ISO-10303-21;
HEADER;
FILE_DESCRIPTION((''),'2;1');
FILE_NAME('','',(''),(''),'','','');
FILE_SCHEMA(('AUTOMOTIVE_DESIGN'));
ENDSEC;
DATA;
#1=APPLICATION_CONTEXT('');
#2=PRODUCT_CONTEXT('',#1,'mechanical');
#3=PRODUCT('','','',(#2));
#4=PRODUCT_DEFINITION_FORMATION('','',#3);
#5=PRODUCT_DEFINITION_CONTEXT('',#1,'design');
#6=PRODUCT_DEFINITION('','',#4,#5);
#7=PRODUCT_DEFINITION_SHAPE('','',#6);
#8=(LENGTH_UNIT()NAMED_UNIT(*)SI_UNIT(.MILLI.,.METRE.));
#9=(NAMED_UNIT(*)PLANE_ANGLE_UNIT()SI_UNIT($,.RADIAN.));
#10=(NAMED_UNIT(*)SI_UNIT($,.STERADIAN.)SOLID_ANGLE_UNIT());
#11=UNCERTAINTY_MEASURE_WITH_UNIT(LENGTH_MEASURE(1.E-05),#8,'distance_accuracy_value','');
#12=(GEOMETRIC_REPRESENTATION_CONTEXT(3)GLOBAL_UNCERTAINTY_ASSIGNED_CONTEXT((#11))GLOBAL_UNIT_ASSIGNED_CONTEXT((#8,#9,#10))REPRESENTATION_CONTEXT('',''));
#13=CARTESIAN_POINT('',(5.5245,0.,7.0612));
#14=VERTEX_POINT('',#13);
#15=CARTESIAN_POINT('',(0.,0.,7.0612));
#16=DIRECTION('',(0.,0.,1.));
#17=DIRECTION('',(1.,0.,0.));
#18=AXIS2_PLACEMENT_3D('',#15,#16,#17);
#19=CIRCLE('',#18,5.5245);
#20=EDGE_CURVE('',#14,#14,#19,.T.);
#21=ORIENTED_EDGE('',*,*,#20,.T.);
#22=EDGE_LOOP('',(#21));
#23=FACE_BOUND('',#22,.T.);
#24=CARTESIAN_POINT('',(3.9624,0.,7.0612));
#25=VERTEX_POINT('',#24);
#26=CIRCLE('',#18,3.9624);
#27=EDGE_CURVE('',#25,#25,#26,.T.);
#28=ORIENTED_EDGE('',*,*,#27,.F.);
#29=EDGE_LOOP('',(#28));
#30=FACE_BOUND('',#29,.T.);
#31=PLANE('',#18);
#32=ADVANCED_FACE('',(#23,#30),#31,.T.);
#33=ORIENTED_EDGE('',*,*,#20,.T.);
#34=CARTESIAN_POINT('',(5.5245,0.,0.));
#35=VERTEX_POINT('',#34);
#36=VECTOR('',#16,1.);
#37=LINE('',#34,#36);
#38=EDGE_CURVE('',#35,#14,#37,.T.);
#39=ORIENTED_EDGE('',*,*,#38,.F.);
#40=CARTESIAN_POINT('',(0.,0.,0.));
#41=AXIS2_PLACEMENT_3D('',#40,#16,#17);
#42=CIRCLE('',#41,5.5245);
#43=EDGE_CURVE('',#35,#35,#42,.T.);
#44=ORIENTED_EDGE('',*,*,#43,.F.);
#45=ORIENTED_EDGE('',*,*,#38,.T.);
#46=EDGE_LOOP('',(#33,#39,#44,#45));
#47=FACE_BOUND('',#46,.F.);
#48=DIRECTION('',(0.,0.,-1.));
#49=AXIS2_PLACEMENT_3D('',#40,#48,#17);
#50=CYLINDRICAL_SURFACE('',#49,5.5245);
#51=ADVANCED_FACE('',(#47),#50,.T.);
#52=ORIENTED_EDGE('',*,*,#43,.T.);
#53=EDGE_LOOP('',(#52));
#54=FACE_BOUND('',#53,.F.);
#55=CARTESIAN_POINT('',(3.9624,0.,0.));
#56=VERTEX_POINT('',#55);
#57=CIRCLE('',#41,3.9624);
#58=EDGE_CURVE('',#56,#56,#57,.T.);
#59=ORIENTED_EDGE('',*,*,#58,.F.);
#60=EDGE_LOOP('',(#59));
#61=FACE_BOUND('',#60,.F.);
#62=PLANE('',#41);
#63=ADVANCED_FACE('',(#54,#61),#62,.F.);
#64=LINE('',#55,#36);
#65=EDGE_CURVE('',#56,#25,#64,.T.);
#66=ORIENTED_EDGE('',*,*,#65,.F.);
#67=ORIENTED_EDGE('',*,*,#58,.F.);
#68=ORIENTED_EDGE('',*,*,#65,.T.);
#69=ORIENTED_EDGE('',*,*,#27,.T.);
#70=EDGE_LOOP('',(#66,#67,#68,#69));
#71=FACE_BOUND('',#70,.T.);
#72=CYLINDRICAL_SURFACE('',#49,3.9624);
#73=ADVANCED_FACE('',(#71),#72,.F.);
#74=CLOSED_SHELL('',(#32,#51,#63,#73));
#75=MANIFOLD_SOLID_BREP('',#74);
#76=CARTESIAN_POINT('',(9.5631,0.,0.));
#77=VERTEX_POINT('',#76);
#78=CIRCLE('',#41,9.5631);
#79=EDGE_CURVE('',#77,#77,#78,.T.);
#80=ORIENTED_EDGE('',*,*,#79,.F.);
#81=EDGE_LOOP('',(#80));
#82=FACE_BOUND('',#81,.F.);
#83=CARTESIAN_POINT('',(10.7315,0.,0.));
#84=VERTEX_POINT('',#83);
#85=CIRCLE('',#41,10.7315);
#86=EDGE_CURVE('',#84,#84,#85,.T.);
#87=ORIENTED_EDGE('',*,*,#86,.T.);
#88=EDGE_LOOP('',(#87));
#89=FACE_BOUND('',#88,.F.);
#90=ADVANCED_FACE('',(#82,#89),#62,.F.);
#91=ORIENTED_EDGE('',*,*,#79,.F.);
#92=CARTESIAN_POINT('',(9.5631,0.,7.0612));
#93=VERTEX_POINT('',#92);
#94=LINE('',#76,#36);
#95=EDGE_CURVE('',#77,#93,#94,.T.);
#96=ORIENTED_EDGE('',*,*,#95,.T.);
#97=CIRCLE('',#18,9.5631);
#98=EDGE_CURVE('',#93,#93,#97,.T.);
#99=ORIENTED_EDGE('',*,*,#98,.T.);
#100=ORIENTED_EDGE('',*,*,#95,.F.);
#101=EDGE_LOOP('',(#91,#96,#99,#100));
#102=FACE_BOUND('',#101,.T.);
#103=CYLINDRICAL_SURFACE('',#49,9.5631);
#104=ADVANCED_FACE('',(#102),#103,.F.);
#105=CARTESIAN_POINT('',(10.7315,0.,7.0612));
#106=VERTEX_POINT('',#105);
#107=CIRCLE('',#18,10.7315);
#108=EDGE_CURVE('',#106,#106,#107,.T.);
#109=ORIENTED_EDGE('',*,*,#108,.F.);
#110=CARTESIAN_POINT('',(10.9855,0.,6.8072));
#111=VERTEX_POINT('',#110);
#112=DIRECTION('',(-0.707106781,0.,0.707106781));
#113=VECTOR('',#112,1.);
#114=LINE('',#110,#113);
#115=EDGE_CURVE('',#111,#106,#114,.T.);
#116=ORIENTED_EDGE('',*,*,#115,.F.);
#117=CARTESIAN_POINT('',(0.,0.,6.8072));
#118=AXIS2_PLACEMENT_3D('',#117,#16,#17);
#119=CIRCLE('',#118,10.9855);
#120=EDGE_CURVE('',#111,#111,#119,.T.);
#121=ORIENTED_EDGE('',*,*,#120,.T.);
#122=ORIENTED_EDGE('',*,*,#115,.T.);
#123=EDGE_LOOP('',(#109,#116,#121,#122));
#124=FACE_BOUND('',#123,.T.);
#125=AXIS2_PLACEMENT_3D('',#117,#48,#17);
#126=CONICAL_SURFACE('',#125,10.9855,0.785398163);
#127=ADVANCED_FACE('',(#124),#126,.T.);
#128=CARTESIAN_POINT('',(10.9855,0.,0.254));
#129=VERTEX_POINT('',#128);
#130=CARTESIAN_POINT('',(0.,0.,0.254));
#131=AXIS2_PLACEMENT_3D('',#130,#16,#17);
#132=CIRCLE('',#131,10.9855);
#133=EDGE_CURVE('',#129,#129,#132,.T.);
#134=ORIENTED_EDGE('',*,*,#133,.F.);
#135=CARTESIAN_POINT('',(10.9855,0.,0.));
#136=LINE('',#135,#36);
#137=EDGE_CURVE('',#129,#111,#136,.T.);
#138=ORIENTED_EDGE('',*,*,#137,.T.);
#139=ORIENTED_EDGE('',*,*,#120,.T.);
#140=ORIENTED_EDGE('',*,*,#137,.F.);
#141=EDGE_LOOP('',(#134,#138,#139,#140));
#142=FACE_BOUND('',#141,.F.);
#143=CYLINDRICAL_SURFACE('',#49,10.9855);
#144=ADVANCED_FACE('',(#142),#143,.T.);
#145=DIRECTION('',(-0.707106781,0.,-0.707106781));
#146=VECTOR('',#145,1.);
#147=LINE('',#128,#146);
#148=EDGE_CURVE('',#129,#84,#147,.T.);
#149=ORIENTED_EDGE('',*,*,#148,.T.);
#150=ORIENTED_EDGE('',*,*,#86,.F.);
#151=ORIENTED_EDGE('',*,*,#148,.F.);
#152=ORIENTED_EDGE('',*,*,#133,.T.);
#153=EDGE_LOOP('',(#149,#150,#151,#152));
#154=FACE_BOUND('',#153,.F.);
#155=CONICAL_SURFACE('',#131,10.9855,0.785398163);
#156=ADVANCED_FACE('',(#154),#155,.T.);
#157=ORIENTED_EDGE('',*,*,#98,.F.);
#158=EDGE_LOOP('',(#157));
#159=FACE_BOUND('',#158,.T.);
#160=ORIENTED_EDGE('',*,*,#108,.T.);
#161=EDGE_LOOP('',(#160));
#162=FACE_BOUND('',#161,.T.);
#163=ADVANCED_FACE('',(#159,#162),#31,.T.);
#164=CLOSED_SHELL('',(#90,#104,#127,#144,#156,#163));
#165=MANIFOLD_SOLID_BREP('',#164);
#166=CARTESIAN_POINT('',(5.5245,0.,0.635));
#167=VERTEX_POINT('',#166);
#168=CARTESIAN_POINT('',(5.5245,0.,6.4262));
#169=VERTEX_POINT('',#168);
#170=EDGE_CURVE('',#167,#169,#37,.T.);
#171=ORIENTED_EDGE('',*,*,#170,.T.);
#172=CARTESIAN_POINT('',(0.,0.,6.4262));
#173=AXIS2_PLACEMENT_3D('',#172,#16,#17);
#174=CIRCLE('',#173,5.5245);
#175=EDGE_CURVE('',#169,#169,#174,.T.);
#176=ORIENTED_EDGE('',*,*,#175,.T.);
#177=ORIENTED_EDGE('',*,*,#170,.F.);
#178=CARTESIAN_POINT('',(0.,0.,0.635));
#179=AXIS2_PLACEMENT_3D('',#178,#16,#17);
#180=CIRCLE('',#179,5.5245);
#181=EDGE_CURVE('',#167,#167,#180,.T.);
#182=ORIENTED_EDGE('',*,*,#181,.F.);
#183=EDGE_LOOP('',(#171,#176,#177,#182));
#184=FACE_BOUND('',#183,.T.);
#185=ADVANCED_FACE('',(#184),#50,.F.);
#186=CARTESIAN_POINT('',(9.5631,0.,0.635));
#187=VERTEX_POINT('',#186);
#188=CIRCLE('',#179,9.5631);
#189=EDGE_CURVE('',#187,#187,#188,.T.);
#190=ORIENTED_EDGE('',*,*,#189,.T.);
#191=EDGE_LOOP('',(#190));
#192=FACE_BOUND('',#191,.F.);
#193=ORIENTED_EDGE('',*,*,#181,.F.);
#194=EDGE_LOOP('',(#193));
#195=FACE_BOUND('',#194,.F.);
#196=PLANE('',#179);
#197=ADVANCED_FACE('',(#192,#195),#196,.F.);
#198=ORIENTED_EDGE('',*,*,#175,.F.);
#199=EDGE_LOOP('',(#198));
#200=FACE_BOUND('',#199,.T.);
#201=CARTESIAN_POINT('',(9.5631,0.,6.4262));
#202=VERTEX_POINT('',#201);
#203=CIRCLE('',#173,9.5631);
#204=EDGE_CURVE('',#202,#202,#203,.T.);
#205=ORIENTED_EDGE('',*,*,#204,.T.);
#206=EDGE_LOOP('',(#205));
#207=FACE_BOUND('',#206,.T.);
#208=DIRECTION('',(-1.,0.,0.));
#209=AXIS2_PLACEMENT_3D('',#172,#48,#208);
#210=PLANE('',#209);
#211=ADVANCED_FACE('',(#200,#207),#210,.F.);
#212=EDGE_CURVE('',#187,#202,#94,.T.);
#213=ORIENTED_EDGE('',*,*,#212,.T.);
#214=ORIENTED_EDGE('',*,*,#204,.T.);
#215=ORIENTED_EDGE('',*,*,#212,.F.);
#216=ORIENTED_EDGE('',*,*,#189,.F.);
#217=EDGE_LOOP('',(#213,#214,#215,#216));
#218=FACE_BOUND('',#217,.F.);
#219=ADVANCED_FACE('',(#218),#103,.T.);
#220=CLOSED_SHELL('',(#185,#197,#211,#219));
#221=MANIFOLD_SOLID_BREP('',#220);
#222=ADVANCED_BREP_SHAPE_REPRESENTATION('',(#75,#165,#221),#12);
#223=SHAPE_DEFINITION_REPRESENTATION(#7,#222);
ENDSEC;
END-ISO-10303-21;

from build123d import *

# Parameters (mm, degrees)
F0_R     = 10.9855
F0_R_2   = 9.5631
F1_DEPTH = 7.0612
F0_R_3   = 5.5245
F0_R_4   = 3.9624
F3_DEPTH = 7.0612
F4_DEPTH = 0.635
F5_DEPTH = 25.4
F6_SIZE  = 0.254


# Not quite as in the source:
# - a pattern or mirror of a feature is missing from the dataset's text; its kind, count and spacing are read off the source's solid


with BuildPart() as f1:
    # F0 (on Top) → F1 (new body)
    with BuildSketch(Plane.XY):
        Circle(F0_R)
        Circle(F0_R_2, mode=Mode.SUBTRACT)
    extrude(amount=F1_DEPTH)

    # F0 (on Top) → F5 (cut)
    with BuildSketch(Plane.XY):
        Circle(F0_R_4)
    extrude(amount=F5_DEPTH, mode=Mode.SUBTRACT)

    # F6
    f6_edges = [f1.edges().sort_by_distance(p)[0] for p in [
        (10.9855, 0, 3.5306),
        (-10.9855, 0, 0),
        (-10.9855, 0, 7.0612),
    ]]
    chamfer(f6_edges, length=F6_SIZE)


with BuildPart() as f1b:
    # F0 (on Top) → F1, piece 2 (new body)
    with BuildSketch(Plane.XY):
        Circle(F0_R_3)
        Circle(F0_R_4, mode=Mode.SUBTRACT)
    extrude(amount=F1_DEPTH)


with BuildPart() as f3:
    # F0 (on Top) → F3 (new body, through all)
    with BuildSketch(Plane.XY):
        Circle(F0_R_2)
        Circle(F0_R_3, mode=Mode.SUBTRACT)
    extrude(amount=F3_DEPTH)

    # F0 (on Top) → F4 (cut)
    with BuildSketch(Plane.XY):
        Circle(F0_R_2)
        Circle(F0_R_3, mode=Mode.SUBTRACT)
    f4 = extrude(amount=F4_DEPTH, mode=Mode.SUBTRACT)

    # F4_copies: F4 across plane
    add(f4.mirror(Plane.XY.offset(3.5306)), mode=Mode.SUBTRACT)


solid = Compound([f1.part, f1b.part, f3.part])
